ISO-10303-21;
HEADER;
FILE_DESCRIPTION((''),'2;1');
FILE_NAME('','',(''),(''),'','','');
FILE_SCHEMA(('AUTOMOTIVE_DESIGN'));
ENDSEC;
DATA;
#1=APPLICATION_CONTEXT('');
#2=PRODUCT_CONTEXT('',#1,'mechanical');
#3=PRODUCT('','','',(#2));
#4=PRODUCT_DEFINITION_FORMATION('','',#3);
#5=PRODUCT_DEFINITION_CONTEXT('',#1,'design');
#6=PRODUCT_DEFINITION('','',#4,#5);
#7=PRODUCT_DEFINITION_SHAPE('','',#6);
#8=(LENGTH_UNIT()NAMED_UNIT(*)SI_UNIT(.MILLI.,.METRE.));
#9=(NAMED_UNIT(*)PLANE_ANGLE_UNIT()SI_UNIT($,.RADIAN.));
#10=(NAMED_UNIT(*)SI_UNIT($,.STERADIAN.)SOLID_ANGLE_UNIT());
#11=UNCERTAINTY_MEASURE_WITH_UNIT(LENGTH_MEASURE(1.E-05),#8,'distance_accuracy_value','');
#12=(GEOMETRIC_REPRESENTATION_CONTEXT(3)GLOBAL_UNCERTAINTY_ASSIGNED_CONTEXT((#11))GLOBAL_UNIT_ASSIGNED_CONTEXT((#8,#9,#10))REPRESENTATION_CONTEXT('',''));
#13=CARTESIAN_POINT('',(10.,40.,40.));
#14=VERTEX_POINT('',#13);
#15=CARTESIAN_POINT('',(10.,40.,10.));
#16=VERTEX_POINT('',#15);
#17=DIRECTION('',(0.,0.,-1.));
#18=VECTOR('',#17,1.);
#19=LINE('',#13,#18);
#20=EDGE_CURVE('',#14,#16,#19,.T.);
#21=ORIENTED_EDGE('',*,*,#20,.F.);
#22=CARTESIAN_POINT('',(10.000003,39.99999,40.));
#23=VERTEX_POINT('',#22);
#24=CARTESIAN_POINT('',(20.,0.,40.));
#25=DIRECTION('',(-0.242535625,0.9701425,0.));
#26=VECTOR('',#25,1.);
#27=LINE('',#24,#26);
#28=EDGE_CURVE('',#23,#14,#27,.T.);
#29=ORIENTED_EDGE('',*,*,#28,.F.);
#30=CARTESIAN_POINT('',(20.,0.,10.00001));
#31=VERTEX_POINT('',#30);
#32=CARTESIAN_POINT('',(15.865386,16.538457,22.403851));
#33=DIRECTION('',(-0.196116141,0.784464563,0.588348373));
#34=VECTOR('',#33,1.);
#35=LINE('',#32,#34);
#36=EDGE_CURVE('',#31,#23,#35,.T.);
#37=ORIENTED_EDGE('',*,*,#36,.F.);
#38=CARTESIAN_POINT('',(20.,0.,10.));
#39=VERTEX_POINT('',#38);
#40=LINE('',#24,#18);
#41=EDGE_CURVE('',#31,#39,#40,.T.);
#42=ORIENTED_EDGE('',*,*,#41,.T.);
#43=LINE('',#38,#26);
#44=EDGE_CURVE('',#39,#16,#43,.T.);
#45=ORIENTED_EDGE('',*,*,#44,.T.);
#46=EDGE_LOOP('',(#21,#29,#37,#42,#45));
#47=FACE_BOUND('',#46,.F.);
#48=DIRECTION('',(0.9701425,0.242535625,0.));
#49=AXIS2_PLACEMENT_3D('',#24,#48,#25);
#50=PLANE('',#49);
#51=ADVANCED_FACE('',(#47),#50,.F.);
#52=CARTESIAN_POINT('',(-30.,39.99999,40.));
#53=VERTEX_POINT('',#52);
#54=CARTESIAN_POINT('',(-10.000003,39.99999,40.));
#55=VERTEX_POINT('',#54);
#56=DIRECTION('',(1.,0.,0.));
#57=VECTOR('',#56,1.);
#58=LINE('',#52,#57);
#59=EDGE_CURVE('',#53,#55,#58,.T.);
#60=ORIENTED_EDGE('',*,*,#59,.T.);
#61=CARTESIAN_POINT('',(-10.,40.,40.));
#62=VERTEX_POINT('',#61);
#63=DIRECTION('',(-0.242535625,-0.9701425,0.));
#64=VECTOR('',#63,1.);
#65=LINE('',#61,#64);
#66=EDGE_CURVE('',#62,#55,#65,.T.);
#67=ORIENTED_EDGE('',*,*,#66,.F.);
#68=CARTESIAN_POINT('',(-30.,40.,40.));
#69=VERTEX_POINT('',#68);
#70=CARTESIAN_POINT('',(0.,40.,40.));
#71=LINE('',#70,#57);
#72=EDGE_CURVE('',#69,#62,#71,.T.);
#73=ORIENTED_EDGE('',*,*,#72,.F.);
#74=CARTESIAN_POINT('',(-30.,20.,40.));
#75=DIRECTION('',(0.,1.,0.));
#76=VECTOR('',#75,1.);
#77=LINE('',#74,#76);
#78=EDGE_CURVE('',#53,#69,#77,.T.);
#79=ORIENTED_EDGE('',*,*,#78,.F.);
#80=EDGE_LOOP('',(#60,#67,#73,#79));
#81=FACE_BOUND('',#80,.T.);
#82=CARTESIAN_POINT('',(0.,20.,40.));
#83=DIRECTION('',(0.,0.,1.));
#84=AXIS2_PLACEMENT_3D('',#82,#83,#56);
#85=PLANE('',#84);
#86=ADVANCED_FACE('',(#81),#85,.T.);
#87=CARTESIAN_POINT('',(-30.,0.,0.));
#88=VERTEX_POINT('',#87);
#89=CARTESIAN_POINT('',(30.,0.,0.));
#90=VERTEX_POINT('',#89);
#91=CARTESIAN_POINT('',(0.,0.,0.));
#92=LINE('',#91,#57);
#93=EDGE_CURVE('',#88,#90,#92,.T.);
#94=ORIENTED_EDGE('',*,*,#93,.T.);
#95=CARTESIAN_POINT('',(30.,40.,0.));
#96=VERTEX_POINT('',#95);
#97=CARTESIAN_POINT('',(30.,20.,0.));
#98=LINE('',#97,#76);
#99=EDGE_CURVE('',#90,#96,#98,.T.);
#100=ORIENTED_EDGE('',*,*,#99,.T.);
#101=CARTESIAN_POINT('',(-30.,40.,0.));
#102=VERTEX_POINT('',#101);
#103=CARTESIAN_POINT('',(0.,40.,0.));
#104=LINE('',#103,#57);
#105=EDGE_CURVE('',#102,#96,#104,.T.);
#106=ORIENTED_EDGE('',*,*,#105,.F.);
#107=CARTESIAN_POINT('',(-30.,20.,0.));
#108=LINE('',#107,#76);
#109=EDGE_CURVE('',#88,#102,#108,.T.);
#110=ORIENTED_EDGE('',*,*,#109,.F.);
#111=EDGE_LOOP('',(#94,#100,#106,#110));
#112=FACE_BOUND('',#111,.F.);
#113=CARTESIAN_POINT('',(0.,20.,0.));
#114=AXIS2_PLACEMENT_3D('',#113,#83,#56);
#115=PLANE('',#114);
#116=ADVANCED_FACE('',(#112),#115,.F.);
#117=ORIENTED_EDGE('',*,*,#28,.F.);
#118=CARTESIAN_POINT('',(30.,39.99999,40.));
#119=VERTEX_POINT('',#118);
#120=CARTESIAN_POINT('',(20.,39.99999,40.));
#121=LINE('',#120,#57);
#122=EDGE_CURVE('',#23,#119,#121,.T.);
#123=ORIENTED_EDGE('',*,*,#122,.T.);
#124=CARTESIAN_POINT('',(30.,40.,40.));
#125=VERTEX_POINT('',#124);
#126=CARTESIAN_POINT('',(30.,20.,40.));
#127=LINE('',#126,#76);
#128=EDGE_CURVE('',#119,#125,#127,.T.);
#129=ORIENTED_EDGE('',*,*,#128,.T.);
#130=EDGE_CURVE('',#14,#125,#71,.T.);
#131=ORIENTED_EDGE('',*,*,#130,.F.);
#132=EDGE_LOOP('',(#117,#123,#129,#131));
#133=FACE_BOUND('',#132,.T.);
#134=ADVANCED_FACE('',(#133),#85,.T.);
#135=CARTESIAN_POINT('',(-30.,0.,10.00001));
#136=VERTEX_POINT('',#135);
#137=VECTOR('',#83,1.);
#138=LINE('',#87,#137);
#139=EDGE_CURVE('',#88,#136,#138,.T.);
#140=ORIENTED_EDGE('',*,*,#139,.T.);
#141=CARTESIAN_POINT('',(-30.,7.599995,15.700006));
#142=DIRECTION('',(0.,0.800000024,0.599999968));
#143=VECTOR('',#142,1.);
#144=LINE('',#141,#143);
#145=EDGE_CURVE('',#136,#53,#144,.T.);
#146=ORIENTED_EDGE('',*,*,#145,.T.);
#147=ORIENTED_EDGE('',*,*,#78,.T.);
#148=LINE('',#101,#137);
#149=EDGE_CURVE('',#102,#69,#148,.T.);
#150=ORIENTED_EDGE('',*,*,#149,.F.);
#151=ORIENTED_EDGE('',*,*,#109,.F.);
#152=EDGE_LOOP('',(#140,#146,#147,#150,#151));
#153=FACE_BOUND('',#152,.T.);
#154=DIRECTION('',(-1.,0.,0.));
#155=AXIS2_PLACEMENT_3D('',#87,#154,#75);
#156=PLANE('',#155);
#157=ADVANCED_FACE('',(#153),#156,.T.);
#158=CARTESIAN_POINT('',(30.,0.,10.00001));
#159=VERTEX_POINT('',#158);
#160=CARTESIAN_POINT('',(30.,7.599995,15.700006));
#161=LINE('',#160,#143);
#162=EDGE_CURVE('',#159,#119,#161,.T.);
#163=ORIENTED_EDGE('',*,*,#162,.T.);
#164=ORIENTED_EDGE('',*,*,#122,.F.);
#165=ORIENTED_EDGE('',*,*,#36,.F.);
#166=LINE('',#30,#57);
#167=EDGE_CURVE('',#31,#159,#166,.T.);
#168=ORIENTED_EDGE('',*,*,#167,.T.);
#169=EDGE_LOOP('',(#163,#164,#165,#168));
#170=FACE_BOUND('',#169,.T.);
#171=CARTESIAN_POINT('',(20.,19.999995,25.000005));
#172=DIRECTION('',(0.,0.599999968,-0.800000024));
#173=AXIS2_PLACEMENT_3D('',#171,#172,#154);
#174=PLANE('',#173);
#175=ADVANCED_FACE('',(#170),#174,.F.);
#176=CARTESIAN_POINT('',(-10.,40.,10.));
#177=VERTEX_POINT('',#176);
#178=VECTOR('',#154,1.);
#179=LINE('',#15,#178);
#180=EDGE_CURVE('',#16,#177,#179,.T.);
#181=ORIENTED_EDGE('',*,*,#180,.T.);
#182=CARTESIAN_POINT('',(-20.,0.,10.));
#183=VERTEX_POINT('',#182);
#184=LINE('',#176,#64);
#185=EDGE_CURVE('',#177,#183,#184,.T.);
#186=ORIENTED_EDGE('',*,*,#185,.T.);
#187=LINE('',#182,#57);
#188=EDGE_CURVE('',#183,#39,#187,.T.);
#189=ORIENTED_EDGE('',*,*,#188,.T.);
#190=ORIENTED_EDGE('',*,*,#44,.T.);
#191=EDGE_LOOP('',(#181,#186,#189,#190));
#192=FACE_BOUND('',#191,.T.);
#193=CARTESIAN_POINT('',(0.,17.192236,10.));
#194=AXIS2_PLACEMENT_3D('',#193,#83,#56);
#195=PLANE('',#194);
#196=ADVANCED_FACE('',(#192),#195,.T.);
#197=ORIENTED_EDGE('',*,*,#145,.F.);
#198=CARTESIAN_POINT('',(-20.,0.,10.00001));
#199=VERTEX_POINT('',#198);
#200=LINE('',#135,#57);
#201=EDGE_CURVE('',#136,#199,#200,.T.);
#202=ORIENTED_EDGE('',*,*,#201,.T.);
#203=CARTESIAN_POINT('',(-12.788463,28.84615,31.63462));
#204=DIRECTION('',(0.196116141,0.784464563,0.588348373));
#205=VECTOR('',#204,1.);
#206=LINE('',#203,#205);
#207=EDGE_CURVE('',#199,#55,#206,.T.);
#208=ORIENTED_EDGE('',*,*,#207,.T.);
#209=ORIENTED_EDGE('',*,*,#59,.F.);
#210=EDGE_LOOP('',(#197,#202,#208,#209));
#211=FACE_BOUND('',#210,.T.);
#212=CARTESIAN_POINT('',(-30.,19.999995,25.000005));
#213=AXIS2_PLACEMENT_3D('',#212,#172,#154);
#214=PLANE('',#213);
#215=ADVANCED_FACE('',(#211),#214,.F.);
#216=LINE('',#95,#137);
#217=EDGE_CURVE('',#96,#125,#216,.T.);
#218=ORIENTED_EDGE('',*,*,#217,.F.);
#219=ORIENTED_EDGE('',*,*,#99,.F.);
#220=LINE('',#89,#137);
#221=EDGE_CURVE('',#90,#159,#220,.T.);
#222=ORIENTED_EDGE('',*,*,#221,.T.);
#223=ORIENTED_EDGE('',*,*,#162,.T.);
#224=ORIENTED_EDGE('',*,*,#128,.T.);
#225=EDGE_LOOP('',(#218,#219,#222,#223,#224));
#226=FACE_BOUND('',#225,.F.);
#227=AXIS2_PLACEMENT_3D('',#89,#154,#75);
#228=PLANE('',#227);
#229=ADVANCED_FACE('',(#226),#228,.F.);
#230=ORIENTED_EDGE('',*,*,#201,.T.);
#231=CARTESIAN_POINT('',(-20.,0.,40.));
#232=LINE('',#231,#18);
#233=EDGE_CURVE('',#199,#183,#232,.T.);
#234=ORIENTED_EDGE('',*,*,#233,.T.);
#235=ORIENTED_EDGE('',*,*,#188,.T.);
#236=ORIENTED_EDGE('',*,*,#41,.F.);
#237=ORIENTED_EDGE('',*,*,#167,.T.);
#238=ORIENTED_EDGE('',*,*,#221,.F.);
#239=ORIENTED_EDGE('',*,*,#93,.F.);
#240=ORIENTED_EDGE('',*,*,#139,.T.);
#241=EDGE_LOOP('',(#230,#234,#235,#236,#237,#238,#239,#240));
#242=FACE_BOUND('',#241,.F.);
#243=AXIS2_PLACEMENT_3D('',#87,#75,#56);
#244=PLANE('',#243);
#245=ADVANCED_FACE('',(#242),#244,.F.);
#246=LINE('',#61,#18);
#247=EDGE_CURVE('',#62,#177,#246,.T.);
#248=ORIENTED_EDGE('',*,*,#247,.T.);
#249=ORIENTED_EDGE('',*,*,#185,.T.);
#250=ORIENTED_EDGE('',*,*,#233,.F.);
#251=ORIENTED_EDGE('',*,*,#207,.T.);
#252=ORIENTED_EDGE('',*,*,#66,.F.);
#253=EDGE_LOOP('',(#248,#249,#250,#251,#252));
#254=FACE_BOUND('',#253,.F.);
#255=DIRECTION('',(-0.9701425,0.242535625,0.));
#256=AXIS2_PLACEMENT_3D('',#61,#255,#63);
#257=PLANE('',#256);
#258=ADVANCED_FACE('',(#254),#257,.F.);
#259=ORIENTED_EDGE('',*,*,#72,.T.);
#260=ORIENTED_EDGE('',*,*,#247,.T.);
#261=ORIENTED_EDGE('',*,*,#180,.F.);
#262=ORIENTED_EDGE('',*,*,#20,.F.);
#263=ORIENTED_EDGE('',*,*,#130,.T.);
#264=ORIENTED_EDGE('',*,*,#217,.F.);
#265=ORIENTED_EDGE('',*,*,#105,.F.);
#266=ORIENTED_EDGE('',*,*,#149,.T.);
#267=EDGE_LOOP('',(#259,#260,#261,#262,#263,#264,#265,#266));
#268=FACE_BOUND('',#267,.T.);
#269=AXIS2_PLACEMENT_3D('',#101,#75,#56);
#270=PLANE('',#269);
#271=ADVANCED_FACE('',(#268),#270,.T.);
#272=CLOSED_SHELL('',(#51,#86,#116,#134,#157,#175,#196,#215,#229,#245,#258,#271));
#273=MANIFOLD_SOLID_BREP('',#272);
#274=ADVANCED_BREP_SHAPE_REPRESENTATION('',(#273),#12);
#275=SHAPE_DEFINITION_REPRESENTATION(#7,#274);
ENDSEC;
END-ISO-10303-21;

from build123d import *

# Parameters (mm, degrees)
F0_W     = 60
F0_H     = 40
F1_DEPTH = 40
F3_DEPTH = 30
F4_SIZE2 = 39.99999
F4_SIZE  = 29.99999


# Not quite as in the source:
# - a fillet or chamfer is up to 0.001 mm smaller than in the source, because OpenCascade refuses the exact size


with BuildPart() as f1:
    # F0 (on Top) → F1 (new body)
    with BuildSketch(Plane.XY):
        with Locations((0, 20)):
            Rectangle(F0_W, F0_H)
    extrude(amount=F1_DEPTH)

    # F2 (on face) → F3 (cut)
    with BuildSketch(Plane.XY.offset(40)):
        Polygon((-10, 40), (-20, 0), (20, 0), (10, 40), align=None)
    extrude(amount=-F3_DEPTH, mode=Mode.SUBTRACT)

    # F4 (size 30 and 40 in the source; OpenCascade refuses exactly that, so slightly less here)
    f4_edges = [f1.edges().sort_by_distance(p)[0] for p in [
        (-25, 0, 40),
        (25, 0, 40),
    ]]
    f4_side = f1.faces().sort_by_distance((0, 0, 0.72111))[0]
    chamfer(f4_edges, length=F4_SIZE, length2=F4_SIZE2, reference=f4_side)


solid = f1.part
